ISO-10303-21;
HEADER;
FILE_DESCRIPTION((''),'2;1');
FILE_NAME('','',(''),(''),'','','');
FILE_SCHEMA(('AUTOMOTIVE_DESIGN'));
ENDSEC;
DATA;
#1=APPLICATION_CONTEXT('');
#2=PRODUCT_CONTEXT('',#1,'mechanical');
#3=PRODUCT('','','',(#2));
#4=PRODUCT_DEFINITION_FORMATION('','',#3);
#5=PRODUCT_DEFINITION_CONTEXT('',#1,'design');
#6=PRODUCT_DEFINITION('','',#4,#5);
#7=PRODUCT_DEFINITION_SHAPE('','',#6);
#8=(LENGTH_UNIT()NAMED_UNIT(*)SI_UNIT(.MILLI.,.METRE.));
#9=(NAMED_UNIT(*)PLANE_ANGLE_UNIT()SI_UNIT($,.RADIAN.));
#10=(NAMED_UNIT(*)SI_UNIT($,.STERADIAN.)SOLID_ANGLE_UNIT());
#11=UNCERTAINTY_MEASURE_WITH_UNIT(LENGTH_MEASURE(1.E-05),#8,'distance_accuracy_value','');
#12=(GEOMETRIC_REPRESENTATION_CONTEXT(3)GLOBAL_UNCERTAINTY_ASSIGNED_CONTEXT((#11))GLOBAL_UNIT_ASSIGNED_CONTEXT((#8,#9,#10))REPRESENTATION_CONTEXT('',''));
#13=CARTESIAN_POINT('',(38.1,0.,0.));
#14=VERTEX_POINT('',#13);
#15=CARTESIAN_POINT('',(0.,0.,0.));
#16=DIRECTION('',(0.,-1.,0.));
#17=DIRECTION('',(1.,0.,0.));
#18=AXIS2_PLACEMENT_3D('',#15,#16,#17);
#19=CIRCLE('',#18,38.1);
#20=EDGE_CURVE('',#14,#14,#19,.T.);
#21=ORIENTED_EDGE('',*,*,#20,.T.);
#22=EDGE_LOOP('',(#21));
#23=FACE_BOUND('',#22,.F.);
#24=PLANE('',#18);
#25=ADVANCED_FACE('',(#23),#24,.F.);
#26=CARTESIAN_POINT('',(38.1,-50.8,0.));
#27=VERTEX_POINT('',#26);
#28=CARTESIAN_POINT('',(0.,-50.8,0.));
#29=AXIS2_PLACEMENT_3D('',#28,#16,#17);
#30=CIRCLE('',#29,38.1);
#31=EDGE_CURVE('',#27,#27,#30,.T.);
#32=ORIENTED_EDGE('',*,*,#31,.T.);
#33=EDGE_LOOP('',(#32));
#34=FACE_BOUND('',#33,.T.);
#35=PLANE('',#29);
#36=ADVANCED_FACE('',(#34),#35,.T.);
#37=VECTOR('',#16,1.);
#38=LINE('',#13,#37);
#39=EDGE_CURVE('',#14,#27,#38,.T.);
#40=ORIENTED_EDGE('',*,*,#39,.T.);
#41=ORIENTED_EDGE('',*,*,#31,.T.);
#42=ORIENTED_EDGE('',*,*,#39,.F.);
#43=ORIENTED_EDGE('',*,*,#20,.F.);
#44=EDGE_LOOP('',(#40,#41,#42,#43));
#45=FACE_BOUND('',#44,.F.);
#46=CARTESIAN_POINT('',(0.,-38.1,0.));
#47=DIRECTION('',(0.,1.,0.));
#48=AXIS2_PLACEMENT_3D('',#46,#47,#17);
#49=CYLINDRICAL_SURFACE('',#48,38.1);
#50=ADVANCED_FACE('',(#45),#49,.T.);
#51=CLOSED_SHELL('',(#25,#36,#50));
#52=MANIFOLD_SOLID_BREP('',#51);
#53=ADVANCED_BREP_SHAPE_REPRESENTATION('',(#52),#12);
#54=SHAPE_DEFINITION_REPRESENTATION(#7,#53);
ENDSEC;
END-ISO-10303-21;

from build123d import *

# Parameters (mm, degrees)
F0_R     = 38.1
F1_DEPTH = 12.7
F2_DEPTH = 25.4
F3_DEPTH = 12.7


# Not quite as in the source:
# - the program builds the solid bodies; features that only make, move or delete a surface that nothing else refers to are left out


with BuildPart() as f1:
    # F0 (on Front) → F1 (new body)
    with BuildSketch(Plane.XZ):
        Circle(F0_R)
    extrude(amount=F1_DEPTH)

    # F2 (add): a face of the model
    f2_faces = [f1.faces().sort_by_distance(p)[0] for p in [
        (0, -12.7, 0),
    ]]
    extrude(f2_faces, amount=F2_DEPTH)

    # F3 (add): a face of the model
    f3_faces = [f1.faces().sort_by_distance(p)[0] for p in [
        (0, -38.1, 0),
    ]]
    extrude(f3_faces, amount=F3_DEPTH)


solid = f1.part
